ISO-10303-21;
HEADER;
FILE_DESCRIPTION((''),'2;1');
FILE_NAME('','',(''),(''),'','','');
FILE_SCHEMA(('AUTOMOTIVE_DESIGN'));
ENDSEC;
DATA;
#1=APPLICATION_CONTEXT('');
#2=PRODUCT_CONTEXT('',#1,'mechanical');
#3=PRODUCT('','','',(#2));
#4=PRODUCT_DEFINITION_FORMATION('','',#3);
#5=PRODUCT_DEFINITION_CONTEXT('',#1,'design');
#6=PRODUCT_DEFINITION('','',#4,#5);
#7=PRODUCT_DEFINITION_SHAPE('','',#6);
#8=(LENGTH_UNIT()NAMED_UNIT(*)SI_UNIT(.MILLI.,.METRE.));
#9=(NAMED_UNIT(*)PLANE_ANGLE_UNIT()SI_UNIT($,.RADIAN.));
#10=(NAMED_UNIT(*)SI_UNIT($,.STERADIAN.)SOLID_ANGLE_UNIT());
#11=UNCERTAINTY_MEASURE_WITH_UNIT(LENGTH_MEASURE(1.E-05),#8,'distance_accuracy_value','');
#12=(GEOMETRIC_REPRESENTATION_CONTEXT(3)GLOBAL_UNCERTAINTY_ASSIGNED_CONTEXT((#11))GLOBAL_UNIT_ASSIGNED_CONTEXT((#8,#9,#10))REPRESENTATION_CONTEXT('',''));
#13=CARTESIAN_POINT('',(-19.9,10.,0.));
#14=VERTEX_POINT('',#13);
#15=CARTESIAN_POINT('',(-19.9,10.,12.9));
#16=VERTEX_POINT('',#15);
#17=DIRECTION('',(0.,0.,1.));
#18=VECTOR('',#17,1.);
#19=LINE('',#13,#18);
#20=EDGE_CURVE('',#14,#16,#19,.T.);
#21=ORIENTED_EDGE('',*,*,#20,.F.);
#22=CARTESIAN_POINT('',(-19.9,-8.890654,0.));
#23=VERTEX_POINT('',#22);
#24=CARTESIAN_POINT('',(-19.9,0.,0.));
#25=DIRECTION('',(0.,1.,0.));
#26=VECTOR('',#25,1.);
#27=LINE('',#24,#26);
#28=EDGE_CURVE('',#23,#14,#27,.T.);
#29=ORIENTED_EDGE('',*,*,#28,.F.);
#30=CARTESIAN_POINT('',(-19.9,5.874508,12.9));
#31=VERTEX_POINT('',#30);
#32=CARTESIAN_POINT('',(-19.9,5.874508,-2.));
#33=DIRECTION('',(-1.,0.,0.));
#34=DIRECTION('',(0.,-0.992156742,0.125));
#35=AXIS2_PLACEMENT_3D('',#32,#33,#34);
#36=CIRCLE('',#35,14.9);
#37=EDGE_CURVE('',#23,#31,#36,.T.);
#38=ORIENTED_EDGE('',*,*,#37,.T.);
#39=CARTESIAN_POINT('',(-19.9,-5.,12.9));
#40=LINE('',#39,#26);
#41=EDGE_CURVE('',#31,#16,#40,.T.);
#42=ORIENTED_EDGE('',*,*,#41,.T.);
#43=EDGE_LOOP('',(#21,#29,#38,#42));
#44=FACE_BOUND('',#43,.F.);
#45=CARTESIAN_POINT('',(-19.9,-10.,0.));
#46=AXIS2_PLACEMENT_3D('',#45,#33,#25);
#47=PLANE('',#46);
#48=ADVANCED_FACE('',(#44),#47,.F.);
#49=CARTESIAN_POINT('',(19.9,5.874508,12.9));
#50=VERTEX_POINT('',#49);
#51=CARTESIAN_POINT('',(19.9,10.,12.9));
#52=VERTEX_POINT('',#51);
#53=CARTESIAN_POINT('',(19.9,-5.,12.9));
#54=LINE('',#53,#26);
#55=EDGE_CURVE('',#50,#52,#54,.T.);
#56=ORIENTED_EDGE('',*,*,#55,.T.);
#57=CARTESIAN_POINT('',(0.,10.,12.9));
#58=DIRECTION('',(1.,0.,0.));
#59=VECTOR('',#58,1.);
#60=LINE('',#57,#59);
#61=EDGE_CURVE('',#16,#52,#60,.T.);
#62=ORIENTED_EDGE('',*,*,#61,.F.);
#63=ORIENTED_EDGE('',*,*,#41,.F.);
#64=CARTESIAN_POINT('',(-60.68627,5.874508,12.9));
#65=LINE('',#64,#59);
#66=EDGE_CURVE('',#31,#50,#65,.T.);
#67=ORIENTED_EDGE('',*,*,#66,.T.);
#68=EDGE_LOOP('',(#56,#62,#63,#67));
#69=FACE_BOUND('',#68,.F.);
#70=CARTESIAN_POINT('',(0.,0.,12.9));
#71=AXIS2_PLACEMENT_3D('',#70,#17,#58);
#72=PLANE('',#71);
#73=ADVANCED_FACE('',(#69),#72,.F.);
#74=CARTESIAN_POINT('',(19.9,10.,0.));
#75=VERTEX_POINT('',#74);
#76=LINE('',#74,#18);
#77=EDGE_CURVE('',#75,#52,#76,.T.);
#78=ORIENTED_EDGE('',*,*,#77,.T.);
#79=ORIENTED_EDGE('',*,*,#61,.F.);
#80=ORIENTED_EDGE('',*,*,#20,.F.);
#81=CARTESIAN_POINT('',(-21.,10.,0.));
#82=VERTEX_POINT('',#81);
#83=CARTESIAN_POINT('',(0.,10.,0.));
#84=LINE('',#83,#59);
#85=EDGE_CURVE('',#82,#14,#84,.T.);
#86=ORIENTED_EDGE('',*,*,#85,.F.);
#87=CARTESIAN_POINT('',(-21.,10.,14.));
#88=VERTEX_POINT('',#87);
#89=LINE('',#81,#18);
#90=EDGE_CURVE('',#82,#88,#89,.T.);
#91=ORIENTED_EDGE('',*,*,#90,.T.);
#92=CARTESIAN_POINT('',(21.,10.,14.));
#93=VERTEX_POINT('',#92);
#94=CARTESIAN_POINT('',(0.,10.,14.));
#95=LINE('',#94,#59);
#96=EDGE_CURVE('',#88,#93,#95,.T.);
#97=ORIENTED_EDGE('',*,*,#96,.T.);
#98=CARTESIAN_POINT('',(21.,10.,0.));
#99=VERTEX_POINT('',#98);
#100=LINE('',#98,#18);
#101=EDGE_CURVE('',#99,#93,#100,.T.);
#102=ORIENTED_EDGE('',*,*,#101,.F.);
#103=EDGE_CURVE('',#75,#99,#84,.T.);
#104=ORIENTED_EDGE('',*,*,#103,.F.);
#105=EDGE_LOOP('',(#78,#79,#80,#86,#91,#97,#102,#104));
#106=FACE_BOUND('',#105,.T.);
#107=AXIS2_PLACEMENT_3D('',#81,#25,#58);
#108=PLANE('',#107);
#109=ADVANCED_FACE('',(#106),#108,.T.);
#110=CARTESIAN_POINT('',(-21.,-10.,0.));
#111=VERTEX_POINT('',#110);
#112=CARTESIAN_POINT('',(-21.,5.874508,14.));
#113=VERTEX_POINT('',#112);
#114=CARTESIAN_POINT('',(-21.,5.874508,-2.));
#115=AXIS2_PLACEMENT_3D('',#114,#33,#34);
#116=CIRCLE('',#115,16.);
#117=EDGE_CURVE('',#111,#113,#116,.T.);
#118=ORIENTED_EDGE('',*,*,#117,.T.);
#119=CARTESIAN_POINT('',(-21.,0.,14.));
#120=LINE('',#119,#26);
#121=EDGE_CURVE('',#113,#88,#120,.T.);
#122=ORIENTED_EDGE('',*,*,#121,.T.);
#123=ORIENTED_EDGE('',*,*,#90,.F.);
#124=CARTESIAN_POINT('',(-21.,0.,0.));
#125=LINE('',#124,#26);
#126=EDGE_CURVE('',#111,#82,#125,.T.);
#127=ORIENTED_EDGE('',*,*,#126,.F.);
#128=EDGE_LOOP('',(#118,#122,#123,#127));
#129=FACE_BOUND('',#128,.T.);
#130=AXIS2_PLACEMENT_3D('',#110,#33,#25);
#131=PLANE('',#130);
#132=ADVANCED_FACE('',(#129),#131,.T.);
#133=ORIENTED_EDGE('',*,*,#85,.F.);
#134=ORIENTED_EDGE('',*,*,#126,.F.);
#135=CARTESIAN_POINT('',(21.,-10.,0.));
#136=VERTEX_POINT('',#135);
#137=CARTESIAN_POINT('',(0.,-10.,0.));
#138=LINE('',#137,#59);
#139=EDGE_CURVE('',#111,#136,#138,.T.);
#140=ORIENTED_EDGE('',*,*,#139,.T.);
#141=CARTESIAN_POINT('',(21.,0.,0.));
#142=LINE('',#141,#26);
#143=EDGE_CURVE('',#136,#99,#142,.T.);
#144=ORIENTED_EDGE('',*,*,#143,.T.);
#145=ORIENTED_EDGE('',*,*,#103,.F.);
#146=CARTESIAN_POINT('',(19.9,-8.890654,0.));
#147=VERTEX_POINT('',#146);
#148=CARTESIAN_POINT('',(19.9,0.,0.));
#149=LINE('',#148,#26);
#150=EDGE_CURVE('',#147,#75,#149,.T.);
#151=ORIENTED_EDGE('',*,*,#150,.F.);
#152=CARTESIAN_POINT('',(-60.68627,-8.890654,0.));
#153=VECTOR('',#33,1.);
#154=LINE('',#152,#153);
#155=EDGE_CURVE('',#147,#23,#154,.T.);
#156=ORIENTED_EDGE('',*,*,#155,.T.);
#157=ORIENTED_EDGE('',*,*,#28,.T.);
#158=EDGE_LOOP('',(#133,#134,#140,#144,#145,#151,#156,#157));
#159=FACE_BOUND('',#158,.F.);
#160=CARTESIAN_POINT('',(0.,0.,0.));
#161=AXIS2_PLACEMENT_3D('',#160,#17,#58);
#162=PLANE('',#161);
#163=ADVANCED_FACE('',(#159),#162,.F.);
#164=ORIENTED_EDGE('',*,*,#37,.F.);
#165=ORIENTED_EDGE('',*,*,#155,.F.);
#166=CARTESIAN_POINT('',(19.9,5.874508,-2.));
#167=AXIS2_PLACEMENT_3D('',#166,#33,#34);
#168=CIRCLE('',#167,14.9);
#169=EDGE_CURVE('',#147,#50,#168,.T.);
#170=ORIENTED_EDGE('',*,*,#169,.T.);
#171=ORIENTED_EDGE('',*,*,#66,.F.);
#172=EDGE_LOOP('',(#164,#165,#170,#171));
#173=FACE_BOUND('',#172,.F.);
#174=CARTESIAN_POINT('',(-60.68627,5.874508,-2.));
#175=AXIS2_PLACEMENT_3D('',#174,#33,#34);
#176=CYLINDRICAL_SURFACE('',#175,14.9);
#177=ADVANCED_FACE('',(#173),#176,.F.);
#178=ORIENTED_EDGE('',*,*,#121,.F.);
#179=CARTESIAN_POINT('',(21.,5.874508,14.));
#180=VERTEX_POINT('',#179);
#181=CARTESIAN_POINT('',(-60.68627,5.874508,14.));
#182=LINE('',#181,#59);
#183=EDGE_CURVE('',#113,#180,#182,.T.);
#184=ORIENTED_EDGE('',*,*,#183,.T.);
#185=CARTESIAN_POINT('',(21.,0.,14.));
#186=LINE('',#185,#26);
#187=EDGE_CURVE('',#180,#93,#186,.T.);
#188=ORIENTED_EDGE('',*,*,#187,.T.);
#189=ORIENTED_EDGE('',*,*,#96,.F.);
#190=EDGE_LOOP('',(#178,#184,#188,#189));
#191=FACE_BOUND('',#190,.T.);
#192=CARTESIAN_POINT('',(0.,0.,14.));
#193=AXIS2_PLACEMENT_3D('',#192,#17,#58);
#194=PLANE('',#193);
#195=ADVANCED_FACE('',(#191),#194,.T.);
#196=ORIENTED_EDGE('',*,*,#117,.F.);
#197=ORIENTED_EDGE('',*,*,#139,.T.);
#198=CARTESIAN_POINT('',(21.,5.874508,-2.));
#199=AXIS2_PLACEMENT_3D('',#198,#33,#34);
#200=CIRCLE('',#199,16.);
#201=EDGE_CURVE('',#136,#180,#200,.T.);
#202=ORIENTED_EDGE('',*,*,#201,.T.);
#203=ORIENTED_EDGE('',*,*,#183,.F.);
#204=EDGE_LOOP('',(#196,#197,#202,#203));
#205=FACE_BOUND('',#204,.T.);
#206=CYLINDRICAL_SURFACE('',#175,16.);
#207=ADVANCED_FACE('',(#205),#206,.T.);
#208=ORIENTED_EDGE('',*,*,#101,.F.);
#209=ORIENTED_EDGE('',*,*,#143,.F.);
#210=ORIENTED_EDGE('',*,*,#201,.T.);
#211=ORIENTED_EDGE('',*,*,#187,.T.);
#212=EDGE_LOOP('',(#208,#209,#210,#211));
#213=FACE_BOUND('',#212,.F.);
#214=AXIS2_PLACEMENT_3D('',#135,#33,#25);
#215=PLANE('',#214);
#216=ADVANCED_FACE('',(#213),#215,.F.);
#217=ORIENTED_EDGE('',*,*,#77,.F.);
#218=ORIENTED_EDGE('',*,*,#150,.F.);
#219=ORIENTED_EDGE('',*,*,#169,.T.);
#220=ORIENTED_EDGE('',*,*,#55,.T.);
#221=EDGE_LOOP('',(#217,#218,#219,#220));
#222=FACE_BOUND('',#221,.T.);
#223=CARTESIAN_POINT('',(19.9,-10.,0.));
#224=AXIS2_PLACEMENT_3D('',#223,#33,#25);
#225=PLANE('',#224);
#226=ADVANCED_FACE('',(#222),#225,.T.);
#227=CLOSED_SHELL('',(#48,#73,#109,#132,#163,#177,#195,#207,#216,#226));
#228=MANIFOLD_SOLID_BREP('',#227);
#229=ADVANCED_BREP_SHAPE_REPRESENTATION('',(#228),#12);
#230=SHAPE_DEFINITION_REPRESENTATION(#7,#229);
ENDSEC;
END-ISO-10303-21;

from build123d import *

# Parameters (mm, degrees)
F0_W        = 42
F0_H        = 20
F1_DEPTH    = 14
F2_T1_DEPTH = 121.3725393319
F3_T        = -1.1


# Not quite as in the source:
# - a fillet or chamfer that OpenCascade refuses, or shapes differently, is made with other operations: its cross-section is extruded or revolved along the edge and cut away or added


with BuildPart() as f1:
    # F0 (on Top) → F1 (new body)
    with BuildSketch(Plane.XY):
        Rectangle(F0_W, F0_H)
    extrude(amount=F1_DEPTH)

    # F2: fillet of radius 16 on 1 edges, made by hand

    # F2_s2 → F2_t1 (cut)
    with BuildSketch(Plane.YZ.offset(-60.686269666)):
        with BuildLine():
            ThreePointArc((-10, 0), (-4.7084973779, 10), (5.8745078664, 14))
            Line((5.8745078664, 14), (-10, 14))
            Line((-10, 14), (-10, 0))
        make_face()
    extrude(amount=F2_T1_DEPTH, mode=Mode.SUBTRACT)

    # F3
    f3_openings = [f1.faces().sort_by_distance(p)[0] for p in [
        (0, 10, 7),
        (0, 0, 0),
    ]]
    offset(amount=F3_T, openings=f3_openings)


solid = f1.part
